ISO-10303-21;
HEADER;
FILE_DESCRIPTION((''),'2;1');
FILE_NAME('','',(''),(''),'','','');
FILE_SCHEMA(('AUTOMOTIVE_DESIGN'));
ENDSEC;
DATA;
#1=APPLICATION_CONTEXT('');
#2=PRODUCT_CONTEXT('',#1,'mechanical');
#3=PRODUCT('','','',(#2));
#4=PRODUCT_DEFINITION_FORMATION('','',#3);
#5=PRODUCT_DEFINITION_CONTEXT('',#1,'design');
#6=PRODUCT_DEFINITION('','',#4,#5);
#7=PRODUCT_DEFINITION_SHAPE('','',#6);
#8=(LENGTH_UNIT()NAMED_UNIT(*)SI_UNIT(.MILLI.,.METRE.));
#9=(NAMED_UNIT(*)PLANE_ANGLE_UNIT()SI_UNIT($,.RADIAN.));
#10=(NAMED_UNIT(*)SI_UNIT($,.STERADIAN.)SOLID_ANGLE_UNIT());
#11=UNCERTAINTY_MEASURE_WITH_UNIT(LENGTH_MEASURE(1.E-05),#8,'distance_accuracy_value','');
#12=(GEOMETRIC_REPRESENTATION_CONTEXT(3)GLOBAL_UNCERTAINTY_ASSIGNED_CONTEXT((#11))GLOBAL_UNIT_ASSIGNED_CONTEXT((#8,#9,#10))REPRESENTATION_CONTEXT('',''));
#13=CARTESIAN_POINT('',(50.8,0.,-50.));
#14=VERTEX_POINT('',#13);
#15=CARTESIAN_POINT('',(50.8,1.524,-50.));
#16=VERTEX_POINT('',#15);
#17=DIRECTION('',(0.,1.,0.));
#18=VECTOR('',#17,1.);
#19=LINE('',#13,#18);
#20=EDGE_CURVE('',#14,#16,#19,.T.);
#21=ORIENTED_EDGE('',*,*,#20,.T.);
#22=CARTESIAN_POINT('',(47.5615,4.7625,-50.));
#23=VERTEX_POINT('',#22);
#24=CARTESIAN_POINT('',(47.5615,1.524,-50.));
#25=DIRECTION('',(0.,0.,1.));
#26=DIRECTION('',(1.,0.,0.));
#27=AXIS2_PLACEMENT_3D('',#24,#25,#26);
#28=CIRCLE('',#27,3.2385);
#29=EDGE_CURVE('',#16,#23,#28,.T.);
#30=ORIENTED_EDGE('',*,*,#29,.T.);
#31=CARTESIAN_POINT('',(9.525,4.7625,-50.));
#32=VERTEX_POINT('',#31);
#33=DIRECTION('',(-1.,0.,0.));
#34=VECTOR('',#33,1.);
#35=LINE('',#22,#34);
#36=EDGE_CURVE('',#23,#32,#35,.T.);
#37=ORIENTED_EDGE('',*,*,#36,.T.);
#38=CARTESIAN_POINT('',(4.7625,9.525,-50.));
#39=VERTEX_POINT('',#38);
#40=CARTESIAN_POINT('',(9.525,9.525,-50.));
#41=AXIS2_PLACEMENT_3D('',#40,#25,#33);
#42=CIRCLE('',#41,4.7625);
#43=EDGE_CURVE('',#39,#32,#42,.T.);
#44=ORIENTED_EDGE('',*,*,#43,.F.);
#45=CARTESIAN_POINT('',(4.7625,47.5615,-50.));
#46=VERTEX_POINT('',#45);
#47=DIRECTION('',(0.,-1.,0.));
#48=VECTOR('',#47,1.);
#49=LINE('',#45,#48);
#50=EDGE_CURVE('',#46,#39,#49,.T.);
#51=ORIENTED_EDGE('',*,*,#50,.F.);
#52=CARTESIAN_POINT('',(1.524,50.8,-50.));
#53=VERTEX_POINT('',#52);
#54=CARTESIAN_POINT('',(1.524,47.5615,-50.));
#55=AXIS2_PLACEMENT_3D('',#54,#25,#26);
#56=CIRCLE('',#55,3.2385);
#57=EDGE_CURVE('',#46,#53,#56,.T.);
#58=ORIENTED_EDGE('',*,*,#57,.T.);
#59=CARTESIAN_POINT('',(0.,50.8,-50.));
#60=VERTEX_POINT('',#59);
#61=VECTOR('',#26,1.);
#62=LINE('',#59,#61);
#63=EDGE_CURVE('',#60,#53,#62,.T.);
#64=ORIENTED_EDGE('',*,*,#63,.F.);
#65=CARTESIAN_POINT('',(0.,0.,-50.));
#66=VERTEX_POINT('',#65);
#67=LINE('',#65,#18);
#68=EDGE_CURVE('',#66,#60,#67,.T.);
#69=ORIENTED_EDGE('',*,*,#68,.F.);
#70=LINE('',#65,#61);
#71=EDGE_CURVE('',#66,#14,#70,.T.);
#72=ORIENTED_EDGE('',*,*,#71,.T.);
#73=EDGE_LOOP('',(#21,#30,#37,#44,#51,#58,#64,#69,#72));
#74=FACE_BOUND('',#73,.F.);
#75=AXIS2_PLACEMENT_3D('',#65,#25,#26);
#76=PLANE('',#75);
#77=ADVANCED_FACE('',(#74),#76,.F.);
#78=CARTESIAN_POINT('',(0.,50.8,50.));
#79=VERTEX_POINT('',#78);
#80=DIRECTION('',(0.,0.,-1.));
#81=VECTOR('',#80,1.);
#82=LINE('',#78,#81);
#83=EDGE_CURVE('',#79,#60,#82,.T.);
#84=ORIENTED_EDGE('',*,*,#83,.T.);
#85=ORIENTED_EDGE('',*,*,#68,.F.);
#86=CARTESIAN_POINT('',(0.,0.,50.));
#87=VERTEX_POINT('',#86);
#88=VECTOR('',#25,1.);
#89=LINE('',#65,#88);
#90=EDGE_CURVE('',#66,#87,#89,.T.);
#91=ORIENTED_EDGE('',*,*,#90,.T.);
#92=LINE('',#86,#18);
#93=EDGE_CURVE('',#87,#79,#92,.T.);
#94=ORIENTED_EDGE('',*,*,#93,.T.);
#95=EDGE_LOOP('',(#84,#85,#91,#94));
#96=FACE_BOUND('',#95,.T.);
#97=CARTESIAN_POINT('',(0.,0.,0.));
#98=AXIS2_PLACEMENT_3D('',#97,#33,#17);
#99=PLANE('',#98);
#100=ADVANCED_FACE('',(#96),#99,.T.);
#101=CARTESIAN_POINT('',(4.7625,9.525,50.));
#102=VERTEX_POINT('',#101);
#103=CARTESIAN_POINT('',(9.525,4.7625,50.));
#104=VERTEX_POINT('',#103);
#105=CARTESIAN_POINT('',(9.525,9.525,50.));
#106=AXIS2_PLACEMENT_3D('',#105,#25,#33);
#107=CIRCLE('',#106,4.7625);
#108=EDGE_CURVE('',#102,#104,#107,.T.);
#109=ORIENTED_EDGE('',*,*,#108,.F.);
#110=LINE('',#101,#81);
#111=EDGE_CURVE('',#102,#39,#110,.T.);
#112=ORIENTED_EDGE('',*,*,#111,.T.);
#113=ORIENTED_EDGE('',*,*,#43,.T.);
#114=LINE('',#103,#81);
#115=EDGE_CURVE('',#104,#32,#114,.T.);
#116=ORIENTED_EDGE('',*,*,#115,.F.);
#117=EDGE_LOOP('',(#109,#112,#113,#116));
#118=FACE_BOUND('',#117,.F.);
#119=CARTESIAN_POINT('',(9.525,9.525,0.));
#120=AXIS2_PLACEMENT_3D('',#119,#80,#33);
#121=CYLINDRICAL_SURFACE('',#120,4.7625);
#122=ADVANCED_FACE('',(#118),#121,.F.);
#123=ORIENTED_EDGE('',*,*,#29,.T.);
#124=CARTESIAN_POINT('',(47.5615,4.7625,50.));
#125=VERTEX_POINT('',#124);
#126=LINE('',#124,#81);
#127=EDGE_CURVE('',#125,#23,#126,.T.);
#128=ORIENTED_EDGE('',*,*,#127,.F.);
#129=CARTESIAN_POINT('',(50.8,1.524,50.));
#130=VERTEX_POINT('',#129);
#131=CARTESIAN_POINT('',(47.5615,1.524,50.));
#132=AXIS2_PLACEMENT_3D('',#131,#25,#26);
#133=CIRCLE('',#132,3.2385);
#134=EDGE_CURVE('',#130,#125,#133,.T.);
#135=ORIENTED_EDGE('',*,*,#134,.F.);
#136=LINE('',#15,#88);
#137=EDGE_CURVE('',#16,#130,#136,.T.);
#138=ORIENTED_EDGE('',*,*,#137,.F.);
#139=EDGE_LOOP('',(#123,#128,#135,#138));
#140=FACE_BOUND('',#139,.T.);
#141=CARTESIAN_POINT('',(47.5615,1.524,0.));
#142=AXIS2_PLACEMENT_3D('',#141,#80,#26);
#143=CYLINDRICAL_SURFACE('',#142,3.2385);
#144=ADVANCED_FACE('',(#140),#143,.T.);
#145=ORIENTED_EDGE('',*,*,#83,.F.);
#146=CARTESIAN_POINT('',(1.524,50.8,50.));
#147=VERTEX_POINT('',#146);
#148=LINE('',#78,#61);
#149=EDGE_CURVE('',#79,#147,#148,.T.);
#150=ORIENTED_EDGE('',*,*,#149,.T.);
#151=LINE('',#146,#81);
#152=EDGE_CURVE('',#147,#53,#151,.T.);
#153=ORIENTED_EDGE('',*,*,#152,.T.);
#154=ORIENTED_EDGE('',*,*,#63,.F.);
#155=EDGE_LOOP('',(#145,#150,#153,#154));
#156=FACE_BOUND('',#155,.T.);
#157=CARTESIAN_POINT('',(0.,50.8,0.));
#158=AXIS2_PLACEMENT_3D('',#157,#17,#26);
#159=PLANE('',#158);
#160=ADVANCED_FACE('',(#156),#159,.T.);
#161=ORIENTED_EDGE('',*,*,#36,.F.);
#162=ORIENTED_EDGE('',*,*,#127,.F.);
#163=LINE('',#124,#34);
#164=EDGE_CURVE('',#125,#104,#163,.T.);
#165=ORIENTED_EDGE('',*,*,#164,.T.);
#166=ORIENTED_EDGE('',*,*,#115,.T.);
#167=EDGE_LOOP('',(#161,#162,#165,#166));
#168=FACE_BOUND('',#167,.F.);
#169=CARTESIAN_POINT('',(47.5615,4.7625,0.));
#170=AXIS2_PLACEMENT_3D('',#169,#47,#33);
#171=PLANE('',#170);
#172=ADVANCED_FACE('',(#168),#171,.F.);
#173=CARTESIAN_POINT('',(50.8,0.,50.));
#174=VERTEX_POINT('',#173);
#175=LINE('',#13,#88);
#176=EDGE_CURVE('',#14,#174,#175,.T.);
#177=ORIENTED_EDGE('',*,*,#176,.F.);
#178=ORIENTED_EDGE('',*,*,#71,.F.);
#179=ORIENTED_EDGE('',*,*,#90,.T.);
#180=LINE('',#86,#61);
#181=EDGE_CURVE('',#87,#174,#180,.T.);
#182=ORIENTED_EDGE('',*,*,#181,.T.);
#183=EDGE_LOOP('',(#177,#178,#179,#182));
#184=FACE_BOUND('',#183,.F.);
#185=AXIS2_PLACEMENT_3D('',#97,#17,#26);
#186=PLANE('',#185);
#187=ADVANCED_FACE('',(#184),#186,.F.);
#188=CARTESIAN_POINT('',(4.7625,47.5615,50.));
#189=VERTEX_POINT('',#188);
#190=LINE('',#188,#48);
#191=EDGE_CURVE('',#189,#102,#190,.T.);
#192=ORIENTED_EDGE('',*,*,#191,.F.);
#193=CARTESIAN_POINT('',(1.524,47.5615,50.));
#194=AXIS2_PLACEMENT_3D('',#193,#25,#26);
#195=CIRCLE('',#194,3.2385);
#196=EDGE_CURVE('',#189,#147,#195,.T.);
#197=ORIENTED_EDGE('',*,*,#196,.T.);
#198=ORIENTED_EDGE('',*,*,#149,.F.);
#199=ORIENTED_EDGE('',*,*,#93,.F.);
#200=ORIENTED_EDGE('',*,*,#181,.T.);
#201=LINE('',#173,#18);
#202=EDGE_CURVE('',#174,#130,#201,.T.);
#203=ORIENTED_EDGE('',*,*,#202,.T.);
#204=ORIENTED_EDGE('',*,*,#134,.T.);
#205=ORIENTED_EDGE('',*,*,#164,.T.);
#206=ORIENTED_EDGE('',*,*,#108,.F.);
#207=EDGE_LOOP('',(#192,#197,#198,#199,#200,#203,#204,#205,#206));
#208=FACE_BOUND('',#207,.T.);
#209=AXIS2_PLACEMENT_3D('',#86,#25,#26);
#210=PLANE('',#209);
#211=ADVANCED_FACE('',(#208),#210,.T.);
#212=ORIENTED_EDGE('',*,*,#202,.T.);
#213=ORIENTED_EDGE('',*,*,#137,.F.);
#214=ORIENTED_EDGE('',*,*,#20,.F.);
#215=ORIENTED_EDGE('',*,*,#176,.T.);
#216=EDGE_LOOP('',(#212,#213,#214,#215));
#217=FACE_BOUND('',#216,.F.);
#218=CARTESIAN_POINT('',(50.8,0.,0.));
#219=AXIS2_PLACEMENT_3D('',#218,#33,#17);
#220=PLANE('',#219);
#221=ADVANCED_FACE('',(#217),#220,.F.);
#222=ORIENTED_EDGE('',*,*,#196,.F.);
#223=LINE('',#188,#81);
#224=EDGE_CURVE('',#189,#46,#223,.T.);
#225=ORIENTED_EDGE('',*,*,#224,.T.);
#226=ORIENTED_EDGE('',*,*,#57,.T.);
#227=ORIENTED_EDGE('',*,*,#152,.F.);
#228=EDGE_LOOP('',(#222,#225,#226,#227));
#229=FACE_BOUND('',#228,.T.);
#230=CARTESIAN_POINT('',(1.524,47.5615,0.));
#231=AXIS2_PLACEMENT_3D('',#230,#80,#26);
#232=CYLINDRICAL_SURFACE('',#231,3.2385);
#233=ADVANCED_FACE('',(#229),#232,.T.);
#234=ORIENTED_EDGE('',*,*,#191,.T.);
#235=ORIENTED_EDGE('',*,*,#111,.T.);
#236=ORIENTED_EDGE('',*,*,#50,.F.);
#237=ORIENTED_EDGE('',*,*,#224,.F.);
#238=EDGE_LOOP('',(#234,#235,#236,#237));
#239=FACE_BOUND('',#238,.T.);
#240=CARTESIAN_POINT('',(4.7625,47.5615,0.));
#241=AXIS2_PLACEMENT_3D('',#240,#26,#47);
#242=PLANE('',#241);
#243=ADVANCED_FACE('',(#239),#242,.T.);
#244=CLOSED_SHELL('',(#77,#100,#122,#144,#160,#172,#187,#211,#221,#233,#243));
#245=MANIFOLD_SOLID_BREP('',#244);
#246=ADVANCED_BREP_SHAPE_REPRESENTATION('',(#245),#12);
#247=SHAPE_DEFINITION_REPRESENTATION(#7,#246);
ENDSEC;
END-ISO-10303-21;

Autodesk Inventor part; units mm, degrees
ref_plane "YZ Plane" through (0, 0, 0) normal (1, 0, 0) x (0, 1, 0)
ref_plane "XZ Plane" through (0, 0, 0) normal (0, 1, 0) x (-1, 0, 0)
ref_plane "XY Plane" through (0, 0, 0) normal (0, 0, 1) x (1, 0, 0)
sketch "Sketch1" plane through (0, 0, 0) normal (0, 0, 1) x (1, 0, 0)
  line L0 (0, 0) -> (0, 50.8)
  line L1 (0, 50.8) -> (1.524, 50.8)
  line L2 (4.7625, 47.5615) -> (4.7625, 9.525)
  line L3 (0, 0) -> (50.8, 0)
  line L4 (50.8, 0) -> (50.8, 1.524)
  line L5 (47.5615, 4.7625) -> (9.525, 4.7625)
  arc A0 (4.7625, 9.525) -> (9.525, 4.7625) centre (9.525, 9.525) ccw
  arc A1 (4.7625, 47.5615) -> (1.524, 50.8) centre (1.524, 47.5615) ccw
  arc A2 (50.8, 1.524) -> (47.5615, 4.7625) centre (47.5615, 1.524) ccw
  dimension "d3" = 4.7625
  dimension "d7" = 3.2385
  dimension "d8" = 3.2385
  dimension "MidRad" = 4.7625
extrude "Extrusion1" add sketch "Sketch1" along normal mid plane 100
properties part number "3_ANGLE IRON, 2 X 2 X 0_25 THK" material "Angle Iron"
